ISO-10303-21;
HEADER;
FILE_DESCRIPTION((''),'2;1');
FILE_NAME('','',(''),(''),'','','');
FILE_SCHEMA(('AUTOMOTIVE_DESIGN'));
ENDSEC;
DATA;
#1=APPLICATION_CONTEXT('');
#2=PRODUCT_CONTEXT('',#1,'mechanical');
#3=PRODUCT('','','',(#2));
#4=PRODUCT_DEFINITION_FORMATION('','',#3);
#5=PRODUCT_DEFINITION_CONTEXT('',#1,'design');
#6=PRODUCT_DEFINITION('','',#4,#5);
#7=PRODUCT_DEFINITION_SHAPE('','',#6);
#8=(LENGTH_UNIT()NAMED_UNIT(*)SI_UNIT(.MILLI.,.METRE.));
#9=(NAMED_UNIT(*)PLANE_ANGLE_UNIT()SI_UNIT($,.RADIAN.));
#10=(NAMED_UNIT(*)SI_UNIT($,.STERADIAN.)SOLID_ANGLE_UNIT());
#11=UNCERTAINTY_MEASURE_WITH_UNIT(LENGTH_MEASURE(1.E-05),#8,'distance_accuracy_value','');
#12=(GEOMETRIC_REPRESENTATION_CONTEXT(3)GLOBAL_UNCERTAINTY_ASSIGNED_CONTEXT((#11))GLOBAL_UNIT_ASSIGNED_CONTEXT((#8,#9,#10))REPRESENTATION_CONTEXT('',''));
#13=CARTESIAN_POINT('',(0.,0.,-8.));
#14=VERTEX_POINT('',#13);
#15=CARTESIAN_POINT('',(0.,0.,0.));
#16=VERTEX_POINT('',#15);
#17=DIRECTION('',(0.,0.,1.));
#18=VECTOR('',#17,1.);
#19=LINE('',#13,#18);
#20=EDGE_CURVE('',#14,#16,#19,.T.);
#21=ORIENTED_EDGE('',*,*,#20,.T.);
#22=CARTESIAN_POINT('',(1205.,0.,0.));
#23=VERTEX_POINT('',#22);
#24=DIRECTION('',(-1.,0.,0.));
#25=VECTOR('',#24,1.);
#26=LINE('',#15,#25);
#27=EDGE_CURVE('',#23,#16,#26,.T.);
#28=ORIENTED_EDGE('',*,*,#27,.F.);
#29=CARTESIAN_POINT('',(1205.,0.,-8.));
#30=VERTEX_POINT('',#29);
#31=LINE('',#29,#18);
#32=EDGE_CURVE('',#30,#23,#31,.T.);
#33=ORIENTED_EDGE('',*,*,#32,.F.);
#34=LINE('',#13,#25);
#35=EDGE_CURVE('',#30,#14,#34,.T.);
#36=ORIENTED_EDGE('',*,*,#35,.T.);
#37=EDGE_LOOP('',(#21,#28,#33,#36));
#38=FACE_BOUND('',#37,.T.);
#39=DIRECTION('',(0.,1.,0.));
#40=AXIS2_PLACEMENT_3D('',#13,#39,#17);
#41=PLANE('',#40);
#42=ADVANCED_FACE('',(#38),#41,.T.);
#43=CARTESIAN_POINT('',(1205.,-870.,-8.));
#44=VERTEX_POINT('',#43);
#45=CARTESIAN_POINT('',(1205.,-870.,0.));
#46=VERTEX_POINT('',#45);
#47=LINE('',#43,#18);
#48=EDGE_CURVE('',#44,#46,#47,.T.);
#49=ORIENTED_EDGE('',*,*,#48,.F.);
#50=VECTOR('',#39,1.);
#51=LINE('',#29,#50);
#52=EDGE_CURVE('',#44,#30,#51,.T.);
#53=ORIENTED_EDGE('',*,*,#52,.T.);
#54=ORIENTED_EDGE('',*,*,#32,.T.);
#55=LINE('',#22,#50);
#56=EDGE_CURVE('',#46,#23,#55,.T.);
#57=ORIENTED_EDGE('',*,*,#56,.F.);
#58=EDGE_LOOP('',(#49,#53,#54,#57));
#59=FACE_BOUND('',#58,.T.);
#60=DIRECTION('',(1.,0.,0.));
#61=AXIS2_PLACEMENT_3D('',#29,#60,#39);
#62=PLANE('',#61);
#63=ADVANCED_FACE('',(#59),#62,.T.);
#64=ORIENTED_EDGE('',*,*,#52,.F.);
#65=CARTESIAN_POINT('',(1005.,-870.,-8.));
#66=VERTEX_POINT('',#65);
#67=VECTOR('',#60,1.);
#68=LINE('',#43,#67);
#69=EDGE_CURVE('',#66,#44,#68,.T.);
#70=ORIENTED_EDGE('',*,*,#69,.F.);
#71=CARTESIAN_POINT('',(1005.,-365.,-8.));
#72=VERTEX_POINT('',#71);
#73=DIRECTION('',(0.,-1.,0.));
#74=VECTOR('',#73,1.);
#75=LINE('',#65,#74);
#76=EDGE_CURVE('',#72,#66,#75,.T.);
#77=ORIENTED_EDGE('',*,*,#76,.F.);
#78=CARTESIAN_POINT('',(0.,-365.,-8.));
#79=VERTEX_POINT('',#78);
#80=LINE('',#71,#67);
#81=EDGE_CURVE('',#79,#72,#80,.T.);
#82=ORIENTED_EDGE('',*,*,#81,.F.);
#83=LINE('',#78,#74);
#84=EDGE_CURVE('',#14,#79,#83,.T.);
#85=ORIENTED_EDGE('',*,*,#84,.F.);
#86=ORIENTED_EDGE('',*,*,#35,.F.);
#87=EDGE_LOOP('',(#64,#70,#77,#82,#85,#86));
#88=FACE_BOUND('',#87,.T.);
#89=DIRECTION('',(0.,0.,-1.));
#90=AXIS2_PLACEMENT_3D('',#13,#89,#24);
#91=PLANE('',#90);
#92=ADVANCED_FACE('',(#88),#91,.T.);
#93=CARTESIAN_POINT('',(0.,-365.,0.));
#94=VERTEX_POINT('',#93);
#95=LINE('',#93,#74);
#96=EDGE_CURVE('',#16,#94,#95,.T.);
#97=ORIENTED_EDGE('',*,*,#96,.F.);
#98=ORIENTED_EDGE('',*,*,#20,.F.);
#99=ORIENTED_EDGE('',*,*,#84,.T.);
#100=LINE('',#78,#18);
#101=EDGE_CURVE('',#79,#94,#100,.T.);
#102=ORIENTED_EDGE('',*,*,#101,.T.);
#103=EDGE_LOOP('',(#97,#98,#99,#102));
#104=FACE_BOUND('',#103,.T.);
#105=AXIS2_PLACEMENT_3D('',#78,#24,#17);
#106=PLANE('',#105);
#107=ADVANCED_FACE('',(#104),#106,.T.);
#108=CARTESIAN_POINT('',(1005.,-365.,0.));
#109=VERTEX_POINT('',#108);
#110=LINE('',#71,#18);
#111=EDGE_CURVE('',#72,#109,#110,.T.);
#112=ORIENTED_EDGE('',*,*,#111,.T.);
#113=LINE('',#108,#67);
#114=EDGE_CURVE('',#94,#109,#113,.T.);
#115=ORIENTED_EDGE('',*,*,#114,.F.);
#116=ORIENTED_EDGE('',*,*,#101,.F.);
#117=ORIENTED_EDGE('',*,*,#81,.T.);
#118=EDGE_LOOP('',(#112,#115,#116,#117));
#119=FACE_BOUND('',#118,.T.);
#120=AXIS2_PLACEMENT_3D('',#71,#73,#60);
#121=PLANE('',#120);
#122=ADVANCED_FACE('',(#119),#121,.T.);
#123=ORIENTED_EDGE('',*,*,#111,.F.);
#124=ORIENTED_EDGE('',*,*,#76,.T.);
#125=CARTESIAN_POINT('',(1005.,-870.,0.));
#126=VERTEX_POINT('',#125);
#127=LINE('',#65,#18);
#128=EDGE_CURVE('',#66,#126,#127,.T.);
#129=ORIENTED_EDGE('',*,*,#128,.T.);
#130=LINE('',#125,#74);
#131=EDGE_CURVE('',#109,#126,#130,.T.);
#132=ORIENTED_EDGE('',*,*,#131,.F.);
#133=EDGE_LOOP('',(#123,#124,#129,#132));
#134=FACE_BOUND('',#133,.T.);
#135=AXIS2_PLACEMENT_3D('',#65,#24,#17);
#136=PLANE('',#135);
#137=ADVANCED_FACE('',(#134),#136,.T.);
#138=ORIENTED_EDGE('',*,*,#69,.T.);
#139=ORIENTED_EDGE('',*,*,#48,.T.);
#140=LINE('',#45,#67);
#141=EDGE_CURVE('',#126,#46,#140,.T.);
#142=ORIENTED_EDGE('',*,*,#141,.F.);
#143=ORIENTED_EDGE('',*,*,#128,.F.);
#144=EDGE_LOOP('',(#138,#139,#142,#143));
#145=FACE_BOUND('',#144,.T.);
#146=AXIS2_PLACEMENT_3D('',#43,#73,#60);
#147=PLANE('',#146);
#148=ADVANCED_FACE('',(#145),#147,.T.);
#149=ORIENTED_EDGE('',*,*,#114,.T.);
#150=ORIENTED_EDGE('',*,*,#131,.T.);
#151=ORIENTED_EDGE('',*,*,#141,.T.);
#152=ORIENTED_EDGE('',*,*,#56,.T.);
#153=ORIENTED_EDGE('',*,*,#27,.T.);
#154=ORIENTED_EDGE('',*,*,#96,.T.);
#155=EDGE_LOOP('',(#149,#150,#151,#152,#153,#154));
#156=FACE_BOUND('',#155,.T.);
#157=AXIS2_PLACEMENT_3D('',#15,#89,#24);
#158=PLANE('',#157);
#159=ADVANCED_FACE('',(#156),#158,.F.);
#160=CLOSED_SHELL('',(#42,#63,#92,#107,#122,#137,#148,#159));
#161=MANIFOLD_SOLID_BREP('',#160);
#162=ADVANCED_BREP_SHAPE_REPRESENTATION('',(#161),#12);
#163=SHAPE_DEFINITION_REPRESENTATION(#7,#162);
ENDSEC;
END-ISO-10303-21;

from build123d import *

# Parameters (mm, degrees)
TABAN_FLAN_1_DEPTH = 8


# Sheet-metal steps are written as plain solids
with BuildPart() as part:
    # Çizim1 → Taban-Flanş1 (new body)
    with BuildSketch(Plane.XY):
        Polygon((0, 0), (1205, 0), (1205, -870), (1005, -870), (1005, -365), (0, -365), align=None)
    extrude(amount=-TABAN_FLAN_1_DEPTH)


solid = part.part
